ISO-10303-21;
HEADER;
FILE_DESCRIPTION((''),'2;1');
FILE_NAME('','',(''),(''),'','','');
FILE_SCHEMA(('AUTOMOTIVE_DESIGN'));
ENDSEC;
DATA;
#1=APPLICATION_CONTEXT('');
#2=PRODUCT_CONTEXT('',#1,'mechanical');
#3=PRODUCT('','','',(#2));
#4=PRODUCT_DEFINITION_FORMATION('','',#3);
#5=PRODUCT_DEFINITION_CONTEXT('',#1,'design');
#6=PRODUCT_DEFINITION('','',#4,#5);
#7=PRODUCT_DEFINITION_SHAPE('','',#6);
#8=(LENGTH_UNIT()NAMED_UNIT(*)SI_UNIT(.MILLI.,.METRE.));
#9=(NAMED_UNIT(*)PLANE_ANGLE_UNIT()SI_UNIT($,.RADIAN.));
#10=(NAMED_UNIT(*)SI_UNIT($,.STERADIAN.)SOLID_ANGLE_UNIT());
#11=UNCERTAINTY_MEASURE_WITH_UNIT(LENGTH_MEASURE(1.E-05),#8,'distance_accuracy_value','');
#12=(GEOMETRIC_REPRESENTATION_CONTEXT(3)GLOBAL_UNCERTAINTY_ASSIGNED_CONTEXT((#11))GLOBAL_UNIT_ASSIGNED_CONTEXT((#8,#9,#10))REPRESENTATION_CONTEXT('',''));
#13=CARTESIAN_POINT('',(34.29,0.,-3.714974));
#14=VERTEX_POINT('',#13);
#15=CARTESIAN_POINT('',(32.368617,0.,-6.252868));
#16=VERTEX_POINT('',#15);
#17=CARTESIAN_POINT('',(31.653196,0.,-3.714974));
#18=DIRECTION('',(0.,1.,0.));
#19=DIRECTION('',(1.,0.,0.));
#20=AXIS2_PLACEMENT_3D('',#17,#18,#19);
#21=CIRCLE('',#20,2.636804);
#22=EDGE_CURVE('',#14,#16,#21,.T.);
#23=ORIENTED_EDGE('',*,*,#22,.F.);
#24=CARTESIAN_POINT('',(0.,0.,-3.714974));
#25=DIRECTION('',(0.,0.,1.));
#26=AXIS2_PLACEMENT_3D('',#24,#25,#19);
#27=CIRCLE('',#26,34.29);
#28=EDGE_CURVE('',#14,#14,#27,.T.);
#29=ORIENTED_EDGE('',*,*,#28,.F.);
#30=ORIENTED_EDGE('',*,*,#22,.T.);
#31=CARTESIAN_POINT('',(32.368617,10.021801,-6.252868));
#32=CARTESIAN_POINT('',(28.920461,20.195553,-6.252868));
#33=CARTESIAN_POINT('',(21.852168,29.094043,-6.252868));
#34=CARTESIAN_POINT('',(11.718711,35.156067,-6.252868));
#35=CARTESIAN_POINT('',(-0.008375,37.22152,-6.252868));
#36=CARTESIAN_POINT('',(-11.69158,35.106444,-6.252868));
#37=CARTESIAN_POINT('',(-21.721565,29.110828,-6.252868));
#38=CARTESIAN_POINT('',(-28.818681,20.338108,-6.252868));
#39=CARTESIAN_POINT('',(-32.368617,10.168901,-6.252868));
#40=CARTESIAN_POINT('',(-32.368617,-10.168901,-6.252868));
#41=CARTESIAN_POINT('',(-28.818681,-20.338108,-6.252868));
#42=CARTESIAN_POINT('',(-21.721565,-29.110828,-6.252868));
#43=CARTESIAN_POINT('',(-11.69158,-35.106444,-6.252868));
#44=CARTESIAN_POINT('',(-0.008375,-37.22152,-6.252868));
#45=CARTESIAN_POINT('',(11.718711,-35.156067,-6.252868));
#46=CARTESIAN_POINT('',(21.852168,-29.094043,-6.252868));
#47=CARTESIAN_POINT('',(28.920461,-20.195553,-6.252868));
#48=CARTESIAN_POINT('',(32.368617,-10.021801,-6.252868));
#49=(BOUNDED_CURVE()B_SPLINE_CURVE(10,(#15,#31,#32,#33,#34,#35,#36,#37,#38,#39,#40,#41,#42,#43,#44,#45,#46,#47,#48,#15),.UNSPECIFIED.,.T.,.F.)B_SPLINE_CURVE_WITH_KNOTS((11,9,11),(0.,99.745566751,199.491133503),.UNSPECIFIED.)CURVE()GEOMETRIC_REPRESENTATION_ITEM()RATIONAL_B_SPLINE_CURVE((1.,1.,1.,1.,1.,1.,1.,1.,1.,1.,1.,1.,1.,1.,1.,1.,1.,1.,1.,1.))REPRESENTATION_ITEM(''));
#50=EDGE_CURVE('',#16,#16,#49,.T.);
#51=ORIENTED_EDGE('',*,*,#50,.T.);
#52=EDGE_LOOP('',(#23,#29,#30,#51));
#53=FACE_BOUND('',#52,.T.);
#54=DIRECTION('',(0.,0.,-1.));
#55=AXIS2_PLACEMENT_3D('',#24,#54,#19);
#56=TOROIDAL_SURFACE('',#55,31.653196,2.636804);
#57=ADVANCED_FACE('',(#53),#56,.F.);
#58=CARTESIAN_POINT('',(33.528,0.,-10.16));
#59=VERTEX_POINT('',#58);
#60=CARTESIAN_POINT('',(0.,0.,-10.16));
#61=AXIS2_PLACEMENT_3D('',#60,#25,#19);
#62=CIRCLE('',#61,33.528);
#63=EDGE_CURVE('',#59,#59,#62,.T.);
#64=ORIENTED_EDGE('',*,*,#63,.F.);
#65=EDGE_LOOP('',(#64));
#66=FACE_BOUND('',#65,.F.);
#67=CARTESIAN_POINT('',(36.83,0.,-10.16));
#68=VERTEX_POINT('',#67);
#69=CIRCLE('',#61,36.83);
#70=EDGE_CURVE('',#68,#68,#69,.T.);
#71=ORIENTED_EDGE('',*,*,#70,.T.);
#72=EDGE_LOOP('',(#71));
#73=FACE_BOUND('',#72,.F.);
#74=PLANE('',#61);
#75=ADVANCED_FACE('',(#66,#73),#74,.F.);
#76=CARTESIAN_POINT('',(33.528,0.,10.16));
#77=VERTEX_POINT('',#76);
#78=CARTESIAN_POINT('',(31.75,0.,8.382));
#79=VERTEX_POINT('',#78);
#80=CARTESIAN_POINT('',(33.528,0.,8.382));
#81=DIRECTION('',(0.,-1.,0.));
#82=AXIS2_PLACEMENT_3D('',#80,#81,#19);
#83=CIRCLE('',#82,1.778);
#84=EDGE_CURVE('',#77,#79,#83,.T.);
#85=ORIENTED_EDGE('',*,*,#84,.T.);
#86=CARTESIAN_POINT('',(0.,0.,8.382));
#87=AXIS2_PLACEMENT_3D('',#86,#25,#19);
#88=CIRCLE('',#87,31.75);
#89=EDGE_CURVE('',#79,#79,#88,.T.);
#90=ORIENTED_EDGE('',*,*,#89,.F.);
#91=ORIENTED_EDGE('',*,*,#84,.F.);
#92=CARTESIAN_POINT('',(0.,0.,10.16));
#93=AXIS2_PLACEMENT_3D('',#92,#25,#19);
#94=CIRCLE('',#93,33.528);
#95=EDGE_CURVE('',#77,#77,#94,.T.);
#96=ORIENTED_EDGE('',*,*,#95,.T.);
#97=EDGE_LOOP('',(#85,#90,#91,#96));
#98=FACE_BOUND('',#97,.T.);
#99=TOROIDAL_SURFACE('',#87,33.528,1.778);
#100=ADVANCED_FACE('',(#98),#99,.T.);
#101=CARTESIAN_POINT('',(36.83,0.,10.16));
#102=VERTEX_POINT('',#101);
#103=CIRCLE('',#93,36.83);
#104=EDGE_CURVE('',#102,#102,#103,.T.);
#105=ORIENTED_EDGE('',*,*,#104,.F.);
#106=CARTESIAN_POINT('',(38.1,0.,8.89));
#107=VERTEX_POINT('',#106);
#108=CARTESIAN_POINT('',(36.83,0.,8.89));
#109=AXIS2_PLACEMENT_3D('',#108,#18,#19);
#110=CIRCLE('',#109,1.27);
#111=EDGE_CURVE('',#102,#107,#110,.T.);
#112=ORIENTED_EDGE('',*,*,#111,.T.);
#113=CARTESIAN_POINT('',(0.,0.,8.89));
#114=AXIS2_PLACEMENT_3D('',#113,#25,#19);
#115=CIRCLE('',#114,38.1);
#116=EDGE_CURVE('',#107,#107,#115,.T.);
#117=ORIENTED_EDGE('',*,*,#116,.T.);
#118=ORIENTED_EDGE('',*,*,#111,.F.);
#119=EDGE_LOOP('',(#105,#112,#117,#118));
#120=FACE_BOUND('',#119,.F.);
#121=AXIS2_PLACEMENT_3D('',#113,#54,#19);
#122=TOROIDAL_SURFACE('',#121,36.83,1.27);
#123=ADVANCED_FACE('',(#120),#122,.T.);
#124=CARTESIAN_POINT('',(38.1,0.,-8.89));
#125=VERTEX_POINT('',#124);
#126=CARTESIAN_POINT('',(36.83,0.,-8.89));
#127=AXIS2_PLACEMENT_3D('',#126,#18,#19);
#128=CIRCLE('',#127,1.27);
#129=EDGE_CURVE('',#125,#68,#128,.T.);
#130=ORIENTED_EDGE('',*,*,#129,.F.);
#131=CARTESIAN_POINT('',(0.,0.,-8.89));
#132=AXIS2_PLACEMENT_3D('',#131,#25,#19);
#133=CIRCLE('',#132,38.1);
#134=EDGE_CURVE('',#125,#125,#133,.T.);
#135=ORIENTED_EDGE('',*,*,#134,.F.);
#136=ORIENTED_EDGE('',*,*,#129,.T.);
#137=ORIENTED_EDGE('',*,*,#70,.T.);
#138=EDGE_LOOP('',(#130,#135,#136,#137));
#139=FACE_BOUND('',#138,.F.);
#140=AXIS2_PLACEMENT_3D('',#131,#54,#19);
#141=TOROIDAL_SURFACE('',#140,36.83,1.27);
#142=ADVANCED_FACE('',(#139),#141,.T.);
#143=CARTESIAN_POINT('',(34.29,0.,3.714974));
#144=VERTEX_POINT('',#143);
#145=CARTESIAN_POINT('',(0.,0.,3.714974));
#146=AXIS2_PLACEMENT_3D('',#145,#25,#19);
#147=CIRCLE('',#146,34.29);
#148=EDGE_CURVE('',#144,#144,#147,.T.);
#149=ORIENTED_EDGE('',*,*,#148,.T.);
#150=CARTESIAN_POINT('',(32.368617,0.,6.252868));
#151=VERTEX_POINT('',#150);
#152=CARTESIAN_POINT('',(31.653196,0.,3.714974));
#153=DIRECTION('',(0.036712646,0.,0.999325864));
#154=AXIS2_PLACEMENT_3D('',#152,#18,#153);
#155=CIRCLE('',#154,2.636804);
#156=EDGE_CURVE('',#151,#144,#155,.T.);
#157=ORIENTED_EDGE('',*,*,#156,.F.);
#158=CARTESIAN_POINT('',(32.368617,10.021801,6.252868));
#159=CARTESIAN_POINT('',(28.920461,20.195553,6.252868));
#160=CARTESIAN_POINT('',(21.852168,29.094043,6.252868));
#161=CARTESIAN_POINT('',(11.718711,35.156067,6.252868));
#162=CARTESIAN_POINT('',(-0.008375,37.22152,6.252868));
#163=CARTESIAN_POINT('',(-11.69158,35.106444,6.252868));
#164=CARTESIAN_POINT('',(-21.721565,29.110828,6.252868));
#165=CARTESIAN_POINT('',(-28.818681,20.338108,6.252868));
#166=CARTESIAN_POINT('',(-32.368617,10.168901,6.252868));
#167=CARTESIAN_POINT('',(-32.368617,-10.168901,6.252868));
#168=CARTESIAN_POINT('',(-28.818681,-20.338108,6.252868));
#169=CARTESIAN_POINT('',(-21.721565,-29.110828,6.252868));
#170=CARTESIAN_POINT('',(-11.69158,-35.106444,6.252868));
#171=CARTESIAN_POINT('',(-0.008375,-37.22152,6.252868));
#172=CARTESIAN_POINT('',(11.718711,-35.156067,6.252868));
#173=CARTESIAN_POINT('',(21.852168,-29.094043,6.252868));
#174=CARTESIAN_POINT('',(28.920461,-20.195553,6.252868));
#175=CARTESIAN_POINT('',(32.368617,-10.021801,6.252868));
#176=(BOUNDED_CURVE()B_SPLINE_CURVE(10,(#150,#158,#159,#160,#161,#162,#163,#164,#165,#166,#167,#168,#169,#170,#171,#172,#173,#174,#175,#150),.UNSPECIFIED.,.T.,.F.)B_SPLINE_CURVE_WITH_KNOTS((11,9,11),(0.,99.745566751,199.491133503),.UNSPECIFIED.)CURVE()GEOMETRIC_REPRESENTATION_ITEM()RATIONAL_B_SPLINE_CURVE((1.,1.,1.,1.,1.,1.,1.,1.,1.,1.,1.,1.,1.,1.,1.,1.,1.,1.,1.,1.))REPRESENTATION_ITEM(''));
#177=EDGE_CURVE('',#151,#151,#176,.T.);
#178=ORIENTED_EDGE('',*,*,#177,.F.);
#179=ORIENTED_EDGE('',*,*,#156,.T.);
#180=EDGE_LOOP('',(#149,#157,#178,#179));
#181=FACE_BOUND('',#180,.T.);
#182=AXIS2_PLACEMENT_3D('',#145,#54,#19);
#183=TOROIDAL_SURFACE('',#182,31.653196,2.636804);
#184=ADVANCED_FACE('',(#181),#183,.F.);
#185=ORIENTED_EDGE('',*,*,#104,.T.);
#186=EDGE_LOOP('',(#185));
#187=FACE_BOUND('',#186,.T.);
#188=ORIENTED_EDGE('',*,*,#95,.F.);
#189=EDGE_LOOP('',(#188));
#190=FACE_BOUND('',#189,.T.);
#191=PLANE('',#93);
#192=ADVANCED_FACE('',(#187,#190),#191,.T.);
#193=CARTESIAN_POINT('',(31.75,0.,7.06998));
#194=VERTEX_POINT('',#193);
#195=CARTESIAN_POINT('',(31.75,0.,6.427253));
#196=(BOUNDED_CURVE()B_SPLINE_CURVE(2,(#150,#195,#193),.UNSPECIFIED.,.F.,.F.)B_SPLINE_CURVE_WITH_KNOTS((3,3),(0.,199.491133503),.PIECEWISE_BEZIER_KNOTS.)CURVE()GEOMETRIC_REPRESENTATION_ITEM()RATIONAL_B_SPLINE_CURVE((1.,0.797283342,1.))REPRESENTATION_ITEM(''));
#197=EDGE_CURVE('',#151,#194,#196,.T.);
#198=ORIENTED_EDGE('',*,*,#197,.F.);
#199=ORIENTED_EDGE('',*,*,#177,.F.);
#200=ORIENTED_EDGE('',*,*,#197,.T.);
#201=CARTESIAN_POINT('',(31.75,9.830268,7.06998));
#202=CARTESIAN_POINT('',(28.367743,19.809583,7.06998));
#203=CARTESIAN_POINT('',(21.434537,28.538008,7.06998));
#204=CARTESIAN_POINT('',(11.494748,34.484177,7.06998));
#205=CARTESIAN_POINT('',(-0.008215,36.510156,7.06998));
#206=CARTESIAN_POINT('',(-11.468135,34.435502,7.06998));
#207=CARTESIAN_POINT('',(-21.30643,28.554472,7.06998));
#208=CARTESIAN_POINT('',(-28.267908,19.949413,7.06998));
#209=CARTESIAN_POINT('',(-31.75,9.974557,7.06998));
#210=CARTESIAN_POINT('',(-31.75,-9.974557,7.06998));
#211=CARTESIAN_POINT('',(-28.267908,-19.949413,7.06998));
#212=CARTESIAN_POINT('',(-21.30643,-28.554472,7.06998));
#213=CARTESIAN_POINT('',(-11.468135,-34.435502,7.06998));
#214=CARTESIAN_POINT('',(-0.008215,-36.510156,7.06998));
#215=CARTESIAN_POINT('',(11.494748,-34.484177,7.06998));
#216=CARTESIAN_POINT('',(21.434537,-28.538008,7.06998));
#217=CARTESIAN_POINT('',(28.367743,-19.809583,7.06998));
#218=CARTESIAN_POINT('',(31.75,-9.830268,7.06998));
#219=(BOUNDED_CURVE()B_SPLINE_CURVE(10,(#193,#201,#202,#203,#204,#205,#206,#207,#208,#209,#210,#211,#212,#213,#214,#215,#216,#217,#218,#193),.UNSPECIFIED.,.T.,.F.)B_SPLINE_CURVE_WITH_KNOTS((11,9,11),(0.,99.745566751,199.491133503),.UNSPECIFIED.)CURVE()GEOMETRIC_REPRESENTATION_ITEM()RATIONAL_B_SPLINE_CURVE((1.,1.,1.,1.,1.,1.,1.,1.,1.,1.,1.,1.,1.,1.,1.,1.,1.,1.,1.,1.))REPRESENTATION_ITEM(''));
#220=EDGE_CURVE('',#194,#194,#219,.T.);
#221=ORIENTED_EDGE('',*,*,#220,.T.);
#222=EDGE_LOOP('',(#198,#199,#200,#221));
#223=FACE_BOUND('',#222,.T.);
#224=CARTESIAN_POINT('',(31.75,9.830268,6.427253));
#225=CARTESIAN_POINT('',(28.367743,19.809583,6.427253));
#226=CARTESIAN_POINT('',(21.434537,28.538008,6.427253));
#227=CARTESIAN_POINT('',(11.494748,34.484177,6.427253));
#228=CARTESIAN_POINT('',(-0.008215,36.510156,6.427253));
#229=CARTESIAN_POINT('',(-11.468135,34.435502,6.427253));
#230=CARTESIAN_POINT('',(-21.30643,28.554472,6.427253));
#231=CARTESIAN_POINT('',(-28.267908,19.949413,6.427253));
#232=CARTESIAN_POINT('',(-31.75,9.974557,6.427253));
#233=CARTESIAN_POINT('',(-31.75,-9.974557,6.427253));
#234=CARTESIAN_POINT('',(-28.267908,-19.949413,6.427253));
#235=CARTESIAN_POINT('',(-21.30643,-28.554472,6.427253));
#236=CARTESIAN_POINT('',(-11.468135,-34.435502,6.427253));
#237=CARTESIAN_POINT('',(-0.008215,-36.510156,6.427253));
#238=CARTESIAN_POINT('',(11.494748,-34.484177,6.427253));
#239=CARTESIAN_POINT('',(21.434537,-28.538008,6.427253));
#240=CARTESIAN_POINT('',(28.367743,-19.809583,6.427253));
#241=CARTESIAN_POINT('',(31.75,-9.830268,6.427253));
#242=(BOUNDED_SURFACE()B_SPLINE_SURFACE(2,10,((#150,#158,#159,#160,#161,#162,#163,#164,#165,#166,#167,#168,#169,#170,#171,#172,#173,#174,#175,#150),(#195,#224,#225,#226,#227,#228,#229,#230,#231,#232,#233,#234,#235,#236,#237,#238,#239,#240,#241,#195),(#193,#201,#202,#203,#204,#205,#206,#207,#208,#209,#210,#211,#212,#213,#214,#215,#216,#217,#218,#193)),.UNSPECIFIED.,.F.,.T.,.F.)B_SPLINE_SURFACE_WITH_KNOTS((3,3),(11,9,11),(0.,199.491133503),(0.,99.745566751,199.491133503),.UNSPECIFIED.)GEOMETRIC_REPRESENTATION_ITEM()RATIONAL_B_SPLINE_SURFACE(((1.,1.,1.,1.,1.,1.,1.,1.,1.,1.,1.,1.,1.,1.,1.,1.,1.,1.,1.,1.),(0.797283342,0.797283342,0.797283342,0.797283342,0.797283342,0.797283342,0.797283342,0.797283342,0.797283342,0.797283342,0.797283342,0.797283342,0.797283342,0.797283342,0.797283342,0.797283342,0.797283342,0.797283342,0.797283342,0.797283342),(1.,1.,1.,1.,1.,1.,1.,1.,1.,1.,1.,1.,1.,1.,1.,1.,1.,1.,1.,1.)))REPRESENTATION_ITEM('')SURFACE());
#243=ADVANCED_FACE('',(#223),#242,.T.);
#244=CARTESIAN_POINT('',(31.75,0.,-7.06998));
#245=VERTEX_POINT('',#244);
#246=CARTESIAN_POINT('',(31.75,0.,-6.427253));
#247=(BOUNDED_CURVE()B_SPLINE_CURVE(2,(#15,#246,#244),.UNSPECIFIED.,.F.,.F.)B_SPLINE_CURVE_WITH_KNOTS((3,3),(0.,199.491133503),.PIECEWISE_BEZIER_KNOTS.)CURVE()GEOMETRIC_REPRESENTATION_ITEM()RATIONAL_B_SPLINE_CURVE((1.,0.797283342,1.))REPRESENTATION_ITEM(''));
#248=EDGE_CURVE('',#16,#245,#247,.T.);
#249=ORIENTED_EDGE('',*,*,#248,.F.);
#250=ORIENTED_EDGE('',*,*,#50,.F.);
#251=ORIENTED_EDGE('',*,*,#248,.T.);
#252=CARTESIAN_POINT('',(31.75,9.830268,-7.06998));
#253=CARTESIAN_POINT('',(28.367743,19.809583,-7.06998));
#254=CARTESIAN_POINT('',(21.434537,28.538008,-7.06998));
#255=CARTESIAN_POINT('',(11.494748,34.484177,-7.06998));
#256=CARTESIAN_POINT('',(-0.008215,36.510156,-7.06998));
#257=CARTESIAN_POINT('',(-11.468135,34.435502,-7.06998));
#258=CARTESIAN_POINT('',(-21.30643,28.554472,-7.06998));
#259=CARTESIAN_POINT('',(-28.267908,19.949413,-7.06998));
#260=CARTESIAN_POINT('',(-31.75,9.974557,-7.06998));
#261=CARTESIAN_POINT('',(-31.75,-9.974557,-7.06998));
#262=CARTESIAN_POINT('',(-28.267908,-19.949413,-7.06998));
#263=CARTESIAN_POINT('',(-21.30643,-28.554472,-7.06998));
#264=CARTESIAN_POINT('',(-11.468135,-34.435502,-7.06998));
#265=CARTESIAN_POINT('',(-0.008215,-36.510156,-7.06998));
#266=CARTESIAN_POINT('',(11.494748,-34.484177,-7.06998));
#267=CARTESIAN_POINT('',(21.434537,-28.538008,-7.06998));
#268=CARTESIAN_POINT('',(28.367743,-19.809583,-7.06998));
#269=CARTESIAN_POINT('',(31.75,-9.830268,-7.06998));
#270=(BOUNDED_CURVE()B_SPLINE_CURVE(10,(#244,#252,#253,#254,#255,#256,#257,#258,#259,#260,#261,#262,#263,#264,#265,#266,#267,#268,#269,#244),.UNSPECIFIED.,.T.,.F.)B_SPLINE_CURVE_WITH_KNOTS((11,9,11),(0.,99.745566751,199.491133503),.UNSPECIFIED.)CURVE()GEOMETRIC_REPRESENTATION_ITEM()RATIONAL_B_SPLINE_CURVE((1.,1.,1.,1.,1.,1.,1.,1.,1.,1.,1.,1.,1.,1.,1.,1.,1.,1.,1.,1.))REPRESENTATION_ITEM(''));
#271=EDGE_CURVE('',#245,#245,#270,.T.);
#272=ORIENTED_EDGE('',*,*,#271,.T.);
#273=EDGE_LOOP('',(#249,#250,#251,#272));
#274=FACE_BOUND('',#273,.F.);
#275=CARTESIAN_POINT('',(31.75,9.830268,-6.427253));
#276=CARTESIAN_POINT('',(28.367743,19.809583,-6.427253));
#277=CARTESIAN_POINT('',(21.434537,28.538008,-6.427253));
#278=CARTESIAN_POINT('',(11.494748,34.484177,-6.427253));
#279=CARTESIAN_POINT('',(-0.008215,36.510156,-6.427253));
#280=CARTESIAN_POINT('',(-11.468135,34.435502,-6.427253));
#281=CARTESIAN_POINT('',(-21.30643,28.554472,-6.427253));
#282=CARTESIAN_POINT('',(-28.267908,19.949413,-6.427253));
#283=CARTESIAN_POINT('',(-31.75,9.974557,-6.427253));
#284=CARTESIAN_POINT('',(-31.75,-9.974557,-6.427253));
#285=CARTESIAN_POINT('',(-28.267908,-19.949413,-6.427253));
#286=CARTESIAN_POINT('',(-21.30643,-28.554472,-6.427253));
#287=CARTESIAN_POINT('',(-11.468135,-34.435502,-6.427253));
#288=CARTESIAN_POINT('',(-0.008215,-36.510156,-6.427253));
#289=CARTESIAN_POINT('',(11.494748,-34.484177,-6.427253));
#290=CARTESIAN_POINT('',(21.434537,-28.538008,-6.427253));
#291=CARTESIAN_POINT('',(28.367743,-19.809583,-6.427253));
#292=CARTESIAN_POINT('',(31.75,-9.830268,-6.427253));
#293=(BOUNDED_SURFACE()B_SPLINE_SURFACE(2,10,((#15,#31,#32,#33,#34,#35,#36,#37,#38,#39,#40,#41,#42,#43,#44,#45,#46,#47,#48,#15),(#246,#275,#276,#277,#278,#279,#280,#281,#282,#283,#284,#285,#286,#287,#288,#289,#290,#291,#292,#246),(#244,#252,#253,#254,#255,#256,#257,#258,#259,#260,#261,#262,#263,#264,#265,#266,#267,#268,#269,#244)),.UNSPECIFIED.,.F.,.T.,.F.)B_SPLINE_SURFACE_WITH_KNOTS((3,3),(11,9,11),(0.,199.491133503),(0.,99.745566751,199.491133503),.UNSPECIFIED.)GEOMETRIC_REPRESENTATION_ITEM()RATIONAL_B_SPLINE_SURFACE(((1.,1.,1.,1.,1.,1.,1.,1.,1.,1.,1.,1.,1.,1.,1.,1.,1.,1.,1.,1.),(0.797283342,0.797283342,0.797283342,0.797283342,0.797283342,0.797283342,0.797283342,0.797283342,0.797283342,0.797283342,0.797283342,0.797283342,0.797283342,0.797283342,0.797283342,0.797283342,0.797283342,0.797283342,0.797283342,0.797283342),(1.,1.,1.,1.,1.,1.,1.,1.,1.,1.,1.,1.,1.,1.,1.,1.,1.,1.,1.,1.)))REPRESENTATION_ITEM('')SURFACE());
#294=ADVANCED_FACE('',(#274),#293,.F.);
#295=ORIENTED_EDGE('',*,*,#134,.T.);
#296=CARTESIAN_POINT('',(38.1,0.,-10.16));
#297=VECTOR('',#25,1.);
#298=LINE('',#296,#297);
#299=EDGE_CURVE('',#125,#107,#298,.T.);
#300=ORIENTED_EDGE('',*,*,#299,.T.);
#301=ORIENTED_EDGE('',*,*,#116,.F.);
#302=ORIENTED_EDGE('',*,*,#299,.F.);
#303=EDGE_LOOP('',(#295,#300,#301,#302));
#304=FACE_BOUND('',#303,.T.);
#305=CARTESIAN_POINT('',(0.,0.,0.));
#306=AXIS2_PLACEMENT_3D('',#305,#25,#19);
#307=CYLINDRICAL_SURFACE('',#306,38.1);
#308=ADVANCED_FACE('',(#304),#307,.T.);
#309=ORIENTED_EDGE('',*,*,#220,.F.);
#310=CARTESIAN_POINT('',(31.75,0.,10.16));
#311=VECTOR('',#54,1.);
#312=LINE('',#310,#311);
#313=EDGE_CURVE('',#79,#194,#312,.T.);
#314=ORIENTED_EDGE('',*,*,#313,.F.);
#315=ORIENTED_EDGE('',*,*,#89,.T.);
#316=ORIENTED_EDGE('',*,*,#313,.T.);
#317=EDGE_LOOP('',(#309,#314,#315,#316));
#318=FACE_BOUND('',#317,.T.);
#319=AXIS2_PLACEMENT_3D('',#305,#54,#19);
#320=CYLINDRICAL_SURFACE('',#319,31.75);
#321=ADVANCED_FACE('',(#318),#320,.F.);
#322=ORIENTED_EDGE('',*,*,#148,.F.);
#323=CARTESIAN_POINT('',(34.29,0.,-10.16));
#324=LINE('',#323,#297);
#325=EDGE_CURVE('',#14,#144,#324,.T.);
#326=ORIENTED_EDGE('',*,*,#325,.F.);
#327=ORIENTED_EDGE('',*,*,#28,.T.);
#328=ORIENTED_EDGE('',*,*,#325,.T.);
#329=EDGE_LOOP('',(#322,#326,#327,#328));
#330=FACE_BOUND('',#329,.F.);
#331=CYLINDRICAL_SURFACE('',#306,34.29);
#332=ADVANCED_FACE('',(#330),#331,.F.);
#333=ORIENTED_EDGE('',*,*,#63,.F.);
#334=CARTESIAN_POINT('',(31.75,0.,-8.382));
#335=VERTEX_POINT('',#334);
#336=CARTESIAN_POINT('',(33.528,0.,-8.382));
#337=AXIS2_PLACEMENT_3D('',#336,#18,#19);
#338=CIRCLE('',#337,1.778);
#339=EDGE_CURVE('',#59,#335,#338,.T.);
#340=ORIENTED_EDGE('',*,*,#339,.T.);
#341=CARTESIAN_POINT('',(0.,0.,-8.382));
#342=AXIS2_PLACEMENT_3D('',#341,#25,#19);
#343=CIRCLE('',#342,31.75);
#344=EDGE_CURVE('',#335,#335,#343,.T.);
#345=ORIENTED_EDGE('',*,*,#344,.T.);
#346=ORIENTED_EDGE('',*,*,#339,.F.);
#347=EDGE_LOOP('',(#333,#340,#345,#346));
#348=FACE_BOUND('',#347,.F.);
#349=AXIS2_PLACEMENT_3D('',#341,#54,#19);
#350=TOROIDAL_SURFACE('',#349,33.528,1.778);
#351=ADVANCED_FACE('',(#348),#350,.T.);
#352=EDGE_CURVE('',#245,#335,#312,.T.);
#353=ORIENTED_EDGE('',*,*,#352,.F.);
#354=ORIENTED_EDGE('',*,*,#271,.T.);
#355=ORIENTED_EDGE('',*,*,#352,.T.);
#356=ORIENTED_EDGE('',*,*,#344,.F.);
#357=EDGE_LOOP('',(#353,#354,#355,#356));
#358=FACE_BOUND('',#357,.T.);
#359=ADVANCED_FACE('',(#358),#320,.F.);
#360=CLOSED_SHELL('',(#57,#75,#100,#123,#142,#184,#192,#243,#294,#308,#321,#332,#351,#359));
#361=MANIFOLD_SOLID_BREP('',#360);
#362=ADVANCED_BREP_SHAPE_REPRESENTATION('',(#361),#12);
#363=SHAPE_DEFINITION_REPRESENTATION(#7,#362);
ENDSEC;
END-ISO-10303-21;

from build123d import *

# Parameters (mm, degrees)
F0_R     = 38.1
F0_R_2   = 31.75
F1_DEPTH = 10.16
F2_T     = -3.81
F3_R     = 1.778
F4_R     = 1.27
F6_R     = 0.8489579777


# Not quite as in the source:
# - a fillet or chamfer that OpenCascade refuses, or shapes differently, is made with other operations: its cross-section is extruded or revolved along the edge and cut away or added


with BuildPart() as f1:
    # F0 (on Top) → F1 (new body, symmetric)
    with BuildSketch(Plane.XY):
        Circle(F0_R)
        Circle(F0_R_2, mode=Mode.SUBTRACT)
    extrude(amount=F1_DEPTH, both=True)

    # F2
    f2_openings = [f1.faces().sort_by_distance(p)[0] for p in [
        (-31.75, 0, 0),
    ]]
    offset(amount=F2_T, openings=f2_openings)

    # F3
    f3_edges = [f1.edges().sort_by_distance(p)[0] for p in [
        (-31.75, 0, 10.16),
        (-31.75, 0, -10.16),
    ]]
    fillet(f3_edges, radius=F3_R)

    # F4
    f4_edges = [f1.edges().sort_by_distance(p)[0] for p in [
        (-38.1, 0, -10.16),
        (-38.1, 0, 10.16),
    ]]
    fillet(f4_edges, radius=F4_R)

    # F5: fillet of radius 2.6368040528 on 2 edges, made by hand

    # F5_s1 → F5_t2 (revolve)
    with BuildSketch(Plane.XZ):
        with BuildLine():
            ThreePointArc((34.29, -3.7149735128), (33.5516148856, -5.5449301098), (31.75, -6.35))
            Line((31.75, -6.35), (34.29, -6.35))
            Line((34.29, -6.35), (34.29, -3.7149735128))
        make_face()
    revolve(axis=Axis((0, 0, -6.35), (0, 0, 1)))

    # F5_s3 → F5_t4 (revolve)
    with BuildSketch(Plane.XZ):
        with BuildLine():
            ThreePointArc((31.75, 6.35), (33.5516148856, 5.5449301098), (34.29, 3.7149735128))
            Line((34.29, 3.7149735128), (34.29, 6.35))
            Line((34.29, 6.35), (31.75, 6.35))
        make_face()
    revolve(axis=Axis((0, 0, 6.35), (0, 0, 1)))

    # F6
    f6_edges = [f1.edges().sort_by_distance(p)[0] for p in [
        (-31.75, 0, 6.35),
        (-31.75, 0, -6.35),
    ]]
    fillet(f6_edges, radius=F6_R)


solid = f1.part
